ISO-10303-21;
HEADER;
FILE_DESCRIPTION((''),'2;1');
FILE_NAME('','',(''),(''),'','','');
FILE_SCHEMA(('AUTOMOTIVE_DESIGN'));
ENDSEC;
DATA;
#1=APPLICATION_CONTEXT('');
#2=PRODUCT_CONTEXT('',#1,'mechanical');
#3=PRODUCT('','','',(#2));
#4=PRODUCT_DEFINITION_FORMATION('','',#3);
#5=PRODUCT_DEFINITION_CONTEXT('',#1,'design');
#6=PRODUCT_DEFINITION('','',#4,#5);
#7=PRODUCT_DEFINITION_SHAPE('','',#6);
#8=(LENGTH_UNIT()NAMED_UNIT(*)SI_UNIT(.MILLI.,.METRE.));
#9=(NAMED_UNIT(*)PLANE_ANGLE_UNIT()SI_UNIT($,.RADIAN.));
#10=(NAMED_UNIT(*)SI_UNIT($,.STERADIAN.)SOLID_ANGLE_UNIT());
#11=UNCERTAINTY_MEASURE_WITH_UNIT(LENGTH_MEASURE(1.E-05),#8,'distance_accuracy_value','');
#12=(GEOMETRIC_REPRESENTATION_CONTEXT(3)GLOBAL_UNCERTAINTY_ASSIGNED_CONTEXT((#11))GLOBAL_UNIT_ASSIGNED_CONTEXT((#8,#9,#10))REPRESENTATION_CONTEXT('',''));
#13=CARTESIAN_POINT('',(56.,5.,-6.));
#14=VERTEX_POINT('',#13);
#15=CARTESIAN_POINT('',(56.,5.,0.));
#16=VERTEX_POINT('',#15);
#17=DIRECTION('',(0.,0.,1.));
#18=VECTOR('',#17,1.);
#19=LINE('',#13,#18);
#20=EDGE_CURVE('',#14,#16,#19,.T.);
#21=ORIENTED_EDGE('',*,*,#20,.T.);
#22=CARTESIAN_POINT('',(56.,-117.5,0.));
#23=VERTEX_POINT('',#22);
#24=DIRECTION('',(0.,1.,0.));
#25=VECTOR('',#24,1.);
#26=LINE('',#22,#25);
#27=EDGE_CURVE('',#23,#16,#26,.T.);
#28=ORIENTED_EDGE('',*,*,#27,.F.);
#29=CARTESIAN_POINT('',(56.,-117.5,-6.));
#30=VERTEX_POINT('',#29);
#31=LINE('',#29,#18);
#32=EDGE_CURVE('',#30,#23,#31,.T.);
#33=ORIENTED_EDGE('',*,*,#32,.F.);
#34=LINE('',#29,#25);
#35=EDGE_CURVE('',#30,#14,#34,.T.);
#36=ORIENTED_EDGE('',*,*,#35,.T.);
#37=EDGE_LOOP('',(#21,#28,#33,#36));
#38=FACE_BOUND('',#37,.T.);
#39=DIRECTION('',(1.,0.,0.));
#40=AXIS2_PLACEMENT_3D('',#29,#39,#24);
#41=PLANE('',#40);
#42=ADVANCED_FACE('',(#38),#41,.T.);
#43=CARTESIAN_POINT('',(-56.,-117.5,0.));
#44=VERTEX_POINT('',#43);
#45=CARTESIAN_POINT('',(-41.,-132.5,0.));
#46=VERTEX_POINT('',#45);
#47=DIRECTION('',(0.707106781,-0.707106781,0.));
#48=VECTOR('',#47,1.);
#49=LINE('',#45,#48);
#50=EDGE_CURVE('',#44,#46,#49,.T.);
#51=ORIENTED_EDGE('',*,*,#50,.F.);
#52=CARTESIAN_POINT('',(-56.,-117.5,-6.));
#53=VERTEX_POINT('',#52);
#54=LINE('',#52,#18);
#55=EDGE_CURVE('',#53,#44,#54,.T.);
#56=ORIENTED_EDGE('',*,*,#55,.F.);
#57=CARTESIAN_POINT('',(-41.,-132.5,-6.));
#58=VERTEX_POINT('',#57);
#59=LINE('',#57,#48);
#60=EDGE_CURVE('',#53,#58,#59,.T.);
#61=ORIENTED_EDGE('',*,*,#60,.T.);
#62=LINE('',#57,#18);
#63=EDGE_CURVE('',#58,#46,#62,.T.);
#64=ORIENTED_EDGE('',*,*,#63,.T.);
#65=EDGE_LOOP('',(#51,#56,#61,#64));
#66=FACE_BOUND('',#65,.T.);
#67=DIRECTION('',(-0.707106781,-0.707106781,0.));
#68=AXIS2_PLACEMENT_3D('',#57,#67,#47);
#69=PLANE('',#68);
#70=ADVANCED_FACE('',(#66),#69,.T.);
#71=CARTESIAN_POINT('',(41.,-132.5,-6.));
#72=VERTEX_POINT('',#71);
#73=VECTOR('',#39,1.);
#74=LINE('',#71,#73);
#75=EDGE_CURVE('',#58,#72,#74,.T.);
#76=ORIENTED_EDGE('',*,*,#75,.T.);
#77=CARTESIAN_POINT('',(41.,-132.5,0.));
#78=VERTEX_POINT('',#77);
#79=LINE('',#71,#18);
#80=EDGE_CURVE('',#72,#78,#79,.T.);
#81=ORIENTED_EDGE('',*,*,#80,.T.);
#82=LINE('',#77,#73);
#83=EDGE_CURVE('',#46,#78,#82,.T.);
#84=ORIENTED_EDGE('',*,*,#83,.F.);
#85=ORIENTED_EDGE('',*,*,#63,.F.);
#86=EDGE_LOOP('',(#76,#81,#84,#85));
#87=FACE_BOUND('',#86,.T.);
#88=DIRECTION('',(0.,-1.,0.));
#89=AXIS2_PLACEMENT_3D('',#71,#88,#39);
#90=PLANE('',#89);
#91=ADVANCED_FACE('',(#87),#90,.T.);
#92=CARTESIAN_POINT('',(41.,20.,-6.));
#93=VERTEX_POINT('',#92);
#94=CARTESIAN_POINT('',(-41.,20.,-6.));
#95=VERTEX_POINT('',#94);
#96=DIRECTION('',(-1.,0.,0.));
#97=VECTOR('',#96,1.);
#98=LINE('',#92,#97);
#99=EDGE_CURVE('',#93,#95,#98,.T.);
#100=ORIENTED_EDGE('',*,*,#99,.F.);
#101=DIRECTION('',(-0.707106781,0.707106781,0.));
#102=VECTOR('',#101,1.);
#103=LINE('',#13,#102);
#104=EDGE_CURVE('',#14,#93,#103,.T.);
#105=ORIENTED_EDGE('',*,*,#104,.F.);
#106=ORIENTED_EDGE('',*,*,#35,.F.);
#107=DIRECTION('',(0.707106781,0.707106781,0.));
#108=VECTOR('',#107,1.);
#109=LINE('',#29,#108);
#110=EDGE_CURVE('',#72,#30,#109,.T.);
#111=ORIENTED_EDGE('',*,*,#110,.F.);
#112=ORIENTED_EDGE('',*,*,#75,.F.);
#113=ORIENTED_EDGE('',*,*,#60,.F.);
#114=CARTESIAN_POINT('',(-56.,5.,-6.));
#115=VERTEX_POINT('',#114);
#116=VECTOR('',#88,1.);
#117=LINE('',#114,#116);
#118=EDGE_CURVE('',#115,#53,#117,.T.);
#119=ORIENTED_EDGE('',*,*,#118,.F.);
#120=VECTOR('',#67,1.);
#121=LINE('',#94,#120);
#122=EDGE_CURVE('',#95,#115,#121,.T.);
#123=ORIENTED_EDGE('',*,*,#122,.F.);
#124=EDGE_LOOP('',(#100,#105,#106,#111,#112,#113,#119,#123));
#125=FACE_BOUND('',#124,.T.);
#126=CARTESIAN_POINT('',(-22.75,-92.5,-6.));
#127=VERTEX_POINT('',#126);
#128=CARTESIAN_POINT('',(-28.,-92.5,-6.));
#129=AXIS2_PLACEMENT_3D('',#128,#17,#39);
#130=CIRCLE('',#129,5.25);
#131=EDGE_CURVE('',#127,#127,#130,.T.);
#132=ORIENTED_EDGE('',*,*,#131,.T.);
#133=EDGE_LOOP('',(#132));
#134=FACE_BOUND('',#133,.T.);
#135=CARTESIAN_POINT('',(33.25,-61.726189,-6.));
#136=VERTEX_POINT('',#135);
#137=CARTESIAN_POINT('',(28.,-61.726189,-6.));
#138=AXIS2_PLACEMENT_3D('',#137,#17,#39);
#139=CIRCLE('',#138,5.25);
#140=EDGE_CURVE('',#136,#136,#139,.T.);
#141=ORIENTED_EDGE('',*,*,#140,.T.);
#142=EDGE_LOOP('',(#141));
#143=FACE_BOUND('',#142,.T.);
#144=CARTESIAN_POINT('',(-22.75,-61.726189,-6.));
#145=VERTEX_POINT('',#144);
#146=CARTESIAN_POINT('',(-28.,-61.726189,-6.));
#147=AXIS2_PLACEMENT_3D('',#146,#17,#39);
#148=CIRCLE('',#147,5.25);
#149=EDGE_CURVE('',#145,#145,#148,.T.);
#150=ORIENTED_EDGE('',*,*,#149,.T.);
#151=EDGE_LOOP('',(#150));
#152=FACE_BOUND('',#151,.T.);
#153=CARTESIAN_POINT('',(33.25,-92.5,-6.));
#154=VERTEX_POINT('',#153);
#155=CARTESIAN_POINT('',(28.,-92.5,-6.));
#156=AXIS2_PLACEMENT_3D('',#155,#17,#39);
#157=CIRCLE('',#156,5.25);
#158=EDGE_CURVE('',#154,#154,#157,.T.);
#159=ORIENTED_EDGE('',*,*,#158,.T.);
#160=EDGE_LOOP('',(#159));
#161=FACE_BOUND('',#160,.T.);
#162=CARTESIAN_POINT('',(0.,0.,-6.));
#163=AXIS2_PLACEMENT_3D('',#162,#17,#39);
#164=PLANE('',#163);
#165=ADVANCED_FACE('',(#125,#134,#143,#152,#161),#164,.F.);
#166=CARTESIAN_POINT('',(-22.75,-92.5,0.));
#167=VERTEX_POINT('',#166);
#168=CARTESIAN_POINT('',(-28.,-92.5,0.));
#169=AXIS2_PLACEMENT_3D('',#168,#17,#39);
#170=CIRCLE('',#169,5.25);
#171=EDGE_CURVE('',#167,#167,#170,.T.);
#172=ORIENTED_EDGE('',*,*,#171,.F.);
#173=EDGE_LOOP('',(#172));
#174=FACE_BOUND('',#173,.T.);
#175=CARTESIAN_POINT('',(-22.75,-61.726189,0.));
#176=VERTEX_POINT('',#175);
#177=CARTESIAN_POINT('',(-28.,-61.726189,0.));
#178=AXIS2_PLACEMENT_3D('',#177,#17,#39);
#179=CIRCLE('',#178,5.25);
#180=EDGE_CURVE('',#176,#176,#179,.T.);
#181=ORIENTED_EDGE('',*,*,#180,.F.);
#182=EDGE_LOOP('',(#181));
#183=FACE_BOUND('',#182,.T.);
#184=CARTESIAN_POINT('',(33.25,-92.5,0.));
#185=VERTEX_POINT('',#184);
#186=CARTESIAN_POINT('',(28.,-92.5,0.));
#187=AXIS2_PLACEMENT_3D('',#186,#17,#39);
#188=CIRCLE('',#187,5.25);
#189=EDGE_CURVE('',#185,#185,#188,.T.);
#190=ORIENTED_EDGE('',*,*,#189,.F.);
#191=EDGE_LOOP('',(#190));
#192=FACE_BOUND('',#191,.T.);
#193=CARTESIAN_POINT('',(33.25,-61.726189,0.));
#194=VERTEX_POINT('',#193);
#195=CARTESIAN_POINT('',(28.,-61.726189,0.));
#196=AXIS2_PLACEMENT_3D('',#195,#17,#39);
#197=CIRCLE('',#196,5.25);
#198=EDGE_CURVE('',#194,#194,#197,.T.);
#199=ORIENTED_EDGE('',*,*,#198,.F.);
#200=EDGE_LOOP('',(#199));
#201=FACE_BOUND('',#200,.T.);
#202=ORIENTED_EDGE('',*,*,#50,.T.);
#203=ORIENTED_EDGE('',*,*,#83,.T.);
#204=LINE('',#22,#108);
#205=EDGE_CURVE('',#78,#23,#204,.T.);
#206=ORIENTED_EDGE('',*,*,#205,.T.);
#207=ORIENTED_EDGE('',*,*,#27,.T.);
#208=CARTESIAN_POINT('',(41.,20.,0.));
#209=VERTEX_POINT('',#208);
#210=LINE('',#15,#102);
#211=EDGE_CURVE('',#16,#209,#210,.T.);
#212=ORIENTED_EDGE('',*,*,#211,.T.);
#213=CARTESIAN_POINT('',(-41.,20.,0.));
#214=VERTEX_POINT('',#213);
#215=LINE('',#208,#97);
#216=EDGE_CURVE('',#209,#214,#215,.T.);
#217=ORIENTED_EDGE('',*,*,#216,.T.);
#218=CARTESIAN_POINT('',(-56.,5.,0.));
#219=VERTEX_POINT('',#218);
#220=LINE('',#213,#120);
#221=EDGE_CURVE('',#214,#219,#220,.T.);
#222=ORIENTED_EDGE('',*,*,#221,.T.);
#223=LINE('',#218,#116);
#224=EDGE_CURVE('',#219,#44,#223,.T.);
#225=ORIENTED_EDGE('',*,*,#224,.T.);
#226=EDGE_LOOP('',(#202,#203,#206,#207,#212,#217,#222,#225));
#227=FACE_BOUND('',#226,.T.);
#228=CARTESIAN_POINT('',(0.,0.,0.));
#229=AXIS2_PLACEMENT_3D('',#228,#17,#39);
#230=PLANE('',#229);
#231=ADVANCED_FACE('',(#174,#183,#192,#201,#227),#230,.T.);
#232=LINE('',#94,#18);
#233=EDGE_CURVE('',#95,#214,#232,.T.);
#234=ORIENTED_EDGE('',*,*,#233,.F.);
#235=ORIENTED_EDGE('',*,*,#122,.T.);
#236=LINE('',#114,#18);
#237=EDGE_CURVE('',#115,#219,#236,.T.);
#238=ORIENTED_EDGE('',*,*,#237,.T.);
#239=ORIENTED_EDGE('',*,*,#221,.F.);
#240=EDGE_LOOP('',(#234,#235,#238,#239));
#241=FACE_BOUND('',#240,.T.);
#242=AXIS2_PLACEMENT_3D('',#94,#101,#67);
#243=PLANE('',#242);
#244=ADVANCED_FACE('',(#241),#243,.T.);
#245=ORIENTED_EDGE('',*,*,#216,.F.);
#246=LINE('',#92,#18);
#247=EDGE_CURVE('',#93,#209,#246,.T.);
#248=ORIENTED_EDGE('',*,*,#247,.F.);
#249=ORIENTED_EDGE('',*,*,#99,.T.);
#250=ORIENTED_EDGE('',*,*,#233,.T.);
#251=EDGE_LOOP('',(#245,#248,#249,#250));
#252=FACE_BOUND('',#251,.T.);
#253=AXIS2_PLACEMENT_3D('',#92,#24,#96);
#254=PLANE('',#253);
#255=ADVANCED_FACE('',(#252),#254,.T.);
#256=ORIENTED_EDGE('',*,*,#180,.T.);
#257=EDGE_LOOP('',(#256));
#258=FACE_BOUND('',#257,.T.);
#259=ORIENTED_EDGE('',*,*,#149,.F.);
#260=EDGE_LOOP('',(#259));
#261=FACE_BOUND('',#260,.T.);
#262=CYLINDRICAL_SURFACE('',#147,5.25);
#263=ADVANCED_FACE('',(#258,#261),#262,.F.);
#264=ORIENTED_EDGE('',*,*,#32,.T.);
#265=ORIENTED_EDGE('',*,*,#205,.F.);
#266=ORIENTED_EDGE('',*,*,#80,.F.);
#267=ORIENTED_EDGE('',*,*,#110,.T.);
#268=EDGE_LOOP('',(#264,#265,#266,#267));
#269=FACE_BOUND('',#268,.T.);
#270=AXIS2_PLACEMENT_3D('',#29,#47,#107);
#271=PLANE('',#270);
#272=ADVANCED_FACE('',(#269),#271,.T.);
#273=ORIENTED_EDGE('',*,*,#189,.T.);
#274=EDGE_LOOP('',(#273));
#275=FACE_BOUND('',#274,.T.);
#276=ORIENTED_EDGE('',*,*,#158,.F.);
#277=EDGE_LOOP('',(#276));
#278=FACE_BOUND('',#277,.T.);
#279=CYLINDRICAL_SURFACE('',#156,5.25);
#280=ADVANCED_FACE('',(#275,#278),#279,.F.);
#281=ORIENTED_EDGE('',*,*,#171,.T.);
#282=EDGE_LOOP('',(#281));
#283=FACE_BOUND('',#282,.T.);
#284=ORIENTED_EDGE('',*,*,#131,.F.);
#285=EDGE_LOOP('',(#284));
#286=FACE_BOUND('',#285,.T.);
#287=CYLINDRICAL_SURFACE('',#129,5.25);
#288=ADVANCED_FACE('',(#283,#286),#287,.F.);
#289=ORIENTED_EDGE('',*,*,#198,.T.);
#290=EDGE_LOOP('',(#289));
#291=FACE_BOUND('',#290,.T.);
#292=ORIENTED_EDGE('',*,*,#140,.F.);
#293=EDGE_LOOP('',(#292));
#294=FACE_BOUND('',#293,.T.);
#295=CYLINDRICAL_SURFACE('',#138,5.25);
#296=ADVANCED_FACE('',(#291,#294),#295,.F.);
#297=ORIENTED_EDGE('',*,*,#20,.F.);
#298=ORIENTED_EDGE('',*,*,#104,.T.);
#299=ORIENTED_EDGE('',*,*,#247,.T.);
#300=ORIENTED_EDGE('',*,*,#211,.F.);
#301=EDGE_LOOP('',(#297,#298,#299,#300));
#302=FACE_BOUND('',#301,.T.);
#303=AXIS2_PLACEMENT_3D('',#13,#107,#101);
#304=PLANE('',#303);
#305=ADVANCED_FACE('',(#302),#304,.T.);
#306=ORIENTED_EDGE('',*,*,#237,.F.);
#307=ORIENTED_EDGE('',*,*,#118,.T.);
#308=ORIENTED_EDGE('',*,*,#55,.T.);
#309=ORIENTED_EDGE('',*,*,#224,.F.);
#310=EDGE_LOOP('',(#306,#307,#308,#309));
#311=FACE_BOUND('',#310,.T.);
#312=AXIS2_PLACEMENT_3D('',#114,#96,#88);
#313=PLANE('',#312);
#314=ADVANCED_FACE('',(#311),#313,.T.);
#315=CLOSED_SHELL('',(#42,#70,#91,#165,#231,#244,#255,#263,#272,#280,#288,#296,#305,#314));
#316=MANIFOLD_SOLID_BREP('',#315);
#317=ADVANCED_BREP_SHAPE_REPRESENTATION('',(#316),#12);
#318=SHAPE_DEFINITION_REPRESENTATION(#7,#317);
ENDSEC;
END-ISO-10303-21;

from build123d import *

# Parameters (mm, degrees)
SKETCH_1_R             = 5.25
SM_BASE_FLANGE_1_DEPTH = 6


# Sheet-metal steps are written as plain solids
with BuildPart() as part:
    # Sketch 1 → Базовая кромка1 (new body)
    with BuildSketch(Plane.XY):
        Polygon((-41, -132.5), (-56, -117.5), (-56, 5), (-41, 20), (41, 20), (56, 5), (56, -117.5), (41, -132.5), align=None)
        with Locations((28, -61.72618932)):
            Circle(SKETCH_1_R, mode=Mode.SUBTRACT)
        with Locations((28, -92.5)):
            Circle(SKETCH_1_R, mode=Mode.SUBTRACT)
        with Locations((-28, -92.5)):
            Circle(SKETCH_1_R, mode=Mode.SUBTRACT)
        with Locations((-28, -61.72618932)):
            Circle(SKETCH_1_R, mode=Mode.SUBTRACT)
    extrude(amount=-SM_BASE_FLANGE_1_DEPTH)


solid = part.part
